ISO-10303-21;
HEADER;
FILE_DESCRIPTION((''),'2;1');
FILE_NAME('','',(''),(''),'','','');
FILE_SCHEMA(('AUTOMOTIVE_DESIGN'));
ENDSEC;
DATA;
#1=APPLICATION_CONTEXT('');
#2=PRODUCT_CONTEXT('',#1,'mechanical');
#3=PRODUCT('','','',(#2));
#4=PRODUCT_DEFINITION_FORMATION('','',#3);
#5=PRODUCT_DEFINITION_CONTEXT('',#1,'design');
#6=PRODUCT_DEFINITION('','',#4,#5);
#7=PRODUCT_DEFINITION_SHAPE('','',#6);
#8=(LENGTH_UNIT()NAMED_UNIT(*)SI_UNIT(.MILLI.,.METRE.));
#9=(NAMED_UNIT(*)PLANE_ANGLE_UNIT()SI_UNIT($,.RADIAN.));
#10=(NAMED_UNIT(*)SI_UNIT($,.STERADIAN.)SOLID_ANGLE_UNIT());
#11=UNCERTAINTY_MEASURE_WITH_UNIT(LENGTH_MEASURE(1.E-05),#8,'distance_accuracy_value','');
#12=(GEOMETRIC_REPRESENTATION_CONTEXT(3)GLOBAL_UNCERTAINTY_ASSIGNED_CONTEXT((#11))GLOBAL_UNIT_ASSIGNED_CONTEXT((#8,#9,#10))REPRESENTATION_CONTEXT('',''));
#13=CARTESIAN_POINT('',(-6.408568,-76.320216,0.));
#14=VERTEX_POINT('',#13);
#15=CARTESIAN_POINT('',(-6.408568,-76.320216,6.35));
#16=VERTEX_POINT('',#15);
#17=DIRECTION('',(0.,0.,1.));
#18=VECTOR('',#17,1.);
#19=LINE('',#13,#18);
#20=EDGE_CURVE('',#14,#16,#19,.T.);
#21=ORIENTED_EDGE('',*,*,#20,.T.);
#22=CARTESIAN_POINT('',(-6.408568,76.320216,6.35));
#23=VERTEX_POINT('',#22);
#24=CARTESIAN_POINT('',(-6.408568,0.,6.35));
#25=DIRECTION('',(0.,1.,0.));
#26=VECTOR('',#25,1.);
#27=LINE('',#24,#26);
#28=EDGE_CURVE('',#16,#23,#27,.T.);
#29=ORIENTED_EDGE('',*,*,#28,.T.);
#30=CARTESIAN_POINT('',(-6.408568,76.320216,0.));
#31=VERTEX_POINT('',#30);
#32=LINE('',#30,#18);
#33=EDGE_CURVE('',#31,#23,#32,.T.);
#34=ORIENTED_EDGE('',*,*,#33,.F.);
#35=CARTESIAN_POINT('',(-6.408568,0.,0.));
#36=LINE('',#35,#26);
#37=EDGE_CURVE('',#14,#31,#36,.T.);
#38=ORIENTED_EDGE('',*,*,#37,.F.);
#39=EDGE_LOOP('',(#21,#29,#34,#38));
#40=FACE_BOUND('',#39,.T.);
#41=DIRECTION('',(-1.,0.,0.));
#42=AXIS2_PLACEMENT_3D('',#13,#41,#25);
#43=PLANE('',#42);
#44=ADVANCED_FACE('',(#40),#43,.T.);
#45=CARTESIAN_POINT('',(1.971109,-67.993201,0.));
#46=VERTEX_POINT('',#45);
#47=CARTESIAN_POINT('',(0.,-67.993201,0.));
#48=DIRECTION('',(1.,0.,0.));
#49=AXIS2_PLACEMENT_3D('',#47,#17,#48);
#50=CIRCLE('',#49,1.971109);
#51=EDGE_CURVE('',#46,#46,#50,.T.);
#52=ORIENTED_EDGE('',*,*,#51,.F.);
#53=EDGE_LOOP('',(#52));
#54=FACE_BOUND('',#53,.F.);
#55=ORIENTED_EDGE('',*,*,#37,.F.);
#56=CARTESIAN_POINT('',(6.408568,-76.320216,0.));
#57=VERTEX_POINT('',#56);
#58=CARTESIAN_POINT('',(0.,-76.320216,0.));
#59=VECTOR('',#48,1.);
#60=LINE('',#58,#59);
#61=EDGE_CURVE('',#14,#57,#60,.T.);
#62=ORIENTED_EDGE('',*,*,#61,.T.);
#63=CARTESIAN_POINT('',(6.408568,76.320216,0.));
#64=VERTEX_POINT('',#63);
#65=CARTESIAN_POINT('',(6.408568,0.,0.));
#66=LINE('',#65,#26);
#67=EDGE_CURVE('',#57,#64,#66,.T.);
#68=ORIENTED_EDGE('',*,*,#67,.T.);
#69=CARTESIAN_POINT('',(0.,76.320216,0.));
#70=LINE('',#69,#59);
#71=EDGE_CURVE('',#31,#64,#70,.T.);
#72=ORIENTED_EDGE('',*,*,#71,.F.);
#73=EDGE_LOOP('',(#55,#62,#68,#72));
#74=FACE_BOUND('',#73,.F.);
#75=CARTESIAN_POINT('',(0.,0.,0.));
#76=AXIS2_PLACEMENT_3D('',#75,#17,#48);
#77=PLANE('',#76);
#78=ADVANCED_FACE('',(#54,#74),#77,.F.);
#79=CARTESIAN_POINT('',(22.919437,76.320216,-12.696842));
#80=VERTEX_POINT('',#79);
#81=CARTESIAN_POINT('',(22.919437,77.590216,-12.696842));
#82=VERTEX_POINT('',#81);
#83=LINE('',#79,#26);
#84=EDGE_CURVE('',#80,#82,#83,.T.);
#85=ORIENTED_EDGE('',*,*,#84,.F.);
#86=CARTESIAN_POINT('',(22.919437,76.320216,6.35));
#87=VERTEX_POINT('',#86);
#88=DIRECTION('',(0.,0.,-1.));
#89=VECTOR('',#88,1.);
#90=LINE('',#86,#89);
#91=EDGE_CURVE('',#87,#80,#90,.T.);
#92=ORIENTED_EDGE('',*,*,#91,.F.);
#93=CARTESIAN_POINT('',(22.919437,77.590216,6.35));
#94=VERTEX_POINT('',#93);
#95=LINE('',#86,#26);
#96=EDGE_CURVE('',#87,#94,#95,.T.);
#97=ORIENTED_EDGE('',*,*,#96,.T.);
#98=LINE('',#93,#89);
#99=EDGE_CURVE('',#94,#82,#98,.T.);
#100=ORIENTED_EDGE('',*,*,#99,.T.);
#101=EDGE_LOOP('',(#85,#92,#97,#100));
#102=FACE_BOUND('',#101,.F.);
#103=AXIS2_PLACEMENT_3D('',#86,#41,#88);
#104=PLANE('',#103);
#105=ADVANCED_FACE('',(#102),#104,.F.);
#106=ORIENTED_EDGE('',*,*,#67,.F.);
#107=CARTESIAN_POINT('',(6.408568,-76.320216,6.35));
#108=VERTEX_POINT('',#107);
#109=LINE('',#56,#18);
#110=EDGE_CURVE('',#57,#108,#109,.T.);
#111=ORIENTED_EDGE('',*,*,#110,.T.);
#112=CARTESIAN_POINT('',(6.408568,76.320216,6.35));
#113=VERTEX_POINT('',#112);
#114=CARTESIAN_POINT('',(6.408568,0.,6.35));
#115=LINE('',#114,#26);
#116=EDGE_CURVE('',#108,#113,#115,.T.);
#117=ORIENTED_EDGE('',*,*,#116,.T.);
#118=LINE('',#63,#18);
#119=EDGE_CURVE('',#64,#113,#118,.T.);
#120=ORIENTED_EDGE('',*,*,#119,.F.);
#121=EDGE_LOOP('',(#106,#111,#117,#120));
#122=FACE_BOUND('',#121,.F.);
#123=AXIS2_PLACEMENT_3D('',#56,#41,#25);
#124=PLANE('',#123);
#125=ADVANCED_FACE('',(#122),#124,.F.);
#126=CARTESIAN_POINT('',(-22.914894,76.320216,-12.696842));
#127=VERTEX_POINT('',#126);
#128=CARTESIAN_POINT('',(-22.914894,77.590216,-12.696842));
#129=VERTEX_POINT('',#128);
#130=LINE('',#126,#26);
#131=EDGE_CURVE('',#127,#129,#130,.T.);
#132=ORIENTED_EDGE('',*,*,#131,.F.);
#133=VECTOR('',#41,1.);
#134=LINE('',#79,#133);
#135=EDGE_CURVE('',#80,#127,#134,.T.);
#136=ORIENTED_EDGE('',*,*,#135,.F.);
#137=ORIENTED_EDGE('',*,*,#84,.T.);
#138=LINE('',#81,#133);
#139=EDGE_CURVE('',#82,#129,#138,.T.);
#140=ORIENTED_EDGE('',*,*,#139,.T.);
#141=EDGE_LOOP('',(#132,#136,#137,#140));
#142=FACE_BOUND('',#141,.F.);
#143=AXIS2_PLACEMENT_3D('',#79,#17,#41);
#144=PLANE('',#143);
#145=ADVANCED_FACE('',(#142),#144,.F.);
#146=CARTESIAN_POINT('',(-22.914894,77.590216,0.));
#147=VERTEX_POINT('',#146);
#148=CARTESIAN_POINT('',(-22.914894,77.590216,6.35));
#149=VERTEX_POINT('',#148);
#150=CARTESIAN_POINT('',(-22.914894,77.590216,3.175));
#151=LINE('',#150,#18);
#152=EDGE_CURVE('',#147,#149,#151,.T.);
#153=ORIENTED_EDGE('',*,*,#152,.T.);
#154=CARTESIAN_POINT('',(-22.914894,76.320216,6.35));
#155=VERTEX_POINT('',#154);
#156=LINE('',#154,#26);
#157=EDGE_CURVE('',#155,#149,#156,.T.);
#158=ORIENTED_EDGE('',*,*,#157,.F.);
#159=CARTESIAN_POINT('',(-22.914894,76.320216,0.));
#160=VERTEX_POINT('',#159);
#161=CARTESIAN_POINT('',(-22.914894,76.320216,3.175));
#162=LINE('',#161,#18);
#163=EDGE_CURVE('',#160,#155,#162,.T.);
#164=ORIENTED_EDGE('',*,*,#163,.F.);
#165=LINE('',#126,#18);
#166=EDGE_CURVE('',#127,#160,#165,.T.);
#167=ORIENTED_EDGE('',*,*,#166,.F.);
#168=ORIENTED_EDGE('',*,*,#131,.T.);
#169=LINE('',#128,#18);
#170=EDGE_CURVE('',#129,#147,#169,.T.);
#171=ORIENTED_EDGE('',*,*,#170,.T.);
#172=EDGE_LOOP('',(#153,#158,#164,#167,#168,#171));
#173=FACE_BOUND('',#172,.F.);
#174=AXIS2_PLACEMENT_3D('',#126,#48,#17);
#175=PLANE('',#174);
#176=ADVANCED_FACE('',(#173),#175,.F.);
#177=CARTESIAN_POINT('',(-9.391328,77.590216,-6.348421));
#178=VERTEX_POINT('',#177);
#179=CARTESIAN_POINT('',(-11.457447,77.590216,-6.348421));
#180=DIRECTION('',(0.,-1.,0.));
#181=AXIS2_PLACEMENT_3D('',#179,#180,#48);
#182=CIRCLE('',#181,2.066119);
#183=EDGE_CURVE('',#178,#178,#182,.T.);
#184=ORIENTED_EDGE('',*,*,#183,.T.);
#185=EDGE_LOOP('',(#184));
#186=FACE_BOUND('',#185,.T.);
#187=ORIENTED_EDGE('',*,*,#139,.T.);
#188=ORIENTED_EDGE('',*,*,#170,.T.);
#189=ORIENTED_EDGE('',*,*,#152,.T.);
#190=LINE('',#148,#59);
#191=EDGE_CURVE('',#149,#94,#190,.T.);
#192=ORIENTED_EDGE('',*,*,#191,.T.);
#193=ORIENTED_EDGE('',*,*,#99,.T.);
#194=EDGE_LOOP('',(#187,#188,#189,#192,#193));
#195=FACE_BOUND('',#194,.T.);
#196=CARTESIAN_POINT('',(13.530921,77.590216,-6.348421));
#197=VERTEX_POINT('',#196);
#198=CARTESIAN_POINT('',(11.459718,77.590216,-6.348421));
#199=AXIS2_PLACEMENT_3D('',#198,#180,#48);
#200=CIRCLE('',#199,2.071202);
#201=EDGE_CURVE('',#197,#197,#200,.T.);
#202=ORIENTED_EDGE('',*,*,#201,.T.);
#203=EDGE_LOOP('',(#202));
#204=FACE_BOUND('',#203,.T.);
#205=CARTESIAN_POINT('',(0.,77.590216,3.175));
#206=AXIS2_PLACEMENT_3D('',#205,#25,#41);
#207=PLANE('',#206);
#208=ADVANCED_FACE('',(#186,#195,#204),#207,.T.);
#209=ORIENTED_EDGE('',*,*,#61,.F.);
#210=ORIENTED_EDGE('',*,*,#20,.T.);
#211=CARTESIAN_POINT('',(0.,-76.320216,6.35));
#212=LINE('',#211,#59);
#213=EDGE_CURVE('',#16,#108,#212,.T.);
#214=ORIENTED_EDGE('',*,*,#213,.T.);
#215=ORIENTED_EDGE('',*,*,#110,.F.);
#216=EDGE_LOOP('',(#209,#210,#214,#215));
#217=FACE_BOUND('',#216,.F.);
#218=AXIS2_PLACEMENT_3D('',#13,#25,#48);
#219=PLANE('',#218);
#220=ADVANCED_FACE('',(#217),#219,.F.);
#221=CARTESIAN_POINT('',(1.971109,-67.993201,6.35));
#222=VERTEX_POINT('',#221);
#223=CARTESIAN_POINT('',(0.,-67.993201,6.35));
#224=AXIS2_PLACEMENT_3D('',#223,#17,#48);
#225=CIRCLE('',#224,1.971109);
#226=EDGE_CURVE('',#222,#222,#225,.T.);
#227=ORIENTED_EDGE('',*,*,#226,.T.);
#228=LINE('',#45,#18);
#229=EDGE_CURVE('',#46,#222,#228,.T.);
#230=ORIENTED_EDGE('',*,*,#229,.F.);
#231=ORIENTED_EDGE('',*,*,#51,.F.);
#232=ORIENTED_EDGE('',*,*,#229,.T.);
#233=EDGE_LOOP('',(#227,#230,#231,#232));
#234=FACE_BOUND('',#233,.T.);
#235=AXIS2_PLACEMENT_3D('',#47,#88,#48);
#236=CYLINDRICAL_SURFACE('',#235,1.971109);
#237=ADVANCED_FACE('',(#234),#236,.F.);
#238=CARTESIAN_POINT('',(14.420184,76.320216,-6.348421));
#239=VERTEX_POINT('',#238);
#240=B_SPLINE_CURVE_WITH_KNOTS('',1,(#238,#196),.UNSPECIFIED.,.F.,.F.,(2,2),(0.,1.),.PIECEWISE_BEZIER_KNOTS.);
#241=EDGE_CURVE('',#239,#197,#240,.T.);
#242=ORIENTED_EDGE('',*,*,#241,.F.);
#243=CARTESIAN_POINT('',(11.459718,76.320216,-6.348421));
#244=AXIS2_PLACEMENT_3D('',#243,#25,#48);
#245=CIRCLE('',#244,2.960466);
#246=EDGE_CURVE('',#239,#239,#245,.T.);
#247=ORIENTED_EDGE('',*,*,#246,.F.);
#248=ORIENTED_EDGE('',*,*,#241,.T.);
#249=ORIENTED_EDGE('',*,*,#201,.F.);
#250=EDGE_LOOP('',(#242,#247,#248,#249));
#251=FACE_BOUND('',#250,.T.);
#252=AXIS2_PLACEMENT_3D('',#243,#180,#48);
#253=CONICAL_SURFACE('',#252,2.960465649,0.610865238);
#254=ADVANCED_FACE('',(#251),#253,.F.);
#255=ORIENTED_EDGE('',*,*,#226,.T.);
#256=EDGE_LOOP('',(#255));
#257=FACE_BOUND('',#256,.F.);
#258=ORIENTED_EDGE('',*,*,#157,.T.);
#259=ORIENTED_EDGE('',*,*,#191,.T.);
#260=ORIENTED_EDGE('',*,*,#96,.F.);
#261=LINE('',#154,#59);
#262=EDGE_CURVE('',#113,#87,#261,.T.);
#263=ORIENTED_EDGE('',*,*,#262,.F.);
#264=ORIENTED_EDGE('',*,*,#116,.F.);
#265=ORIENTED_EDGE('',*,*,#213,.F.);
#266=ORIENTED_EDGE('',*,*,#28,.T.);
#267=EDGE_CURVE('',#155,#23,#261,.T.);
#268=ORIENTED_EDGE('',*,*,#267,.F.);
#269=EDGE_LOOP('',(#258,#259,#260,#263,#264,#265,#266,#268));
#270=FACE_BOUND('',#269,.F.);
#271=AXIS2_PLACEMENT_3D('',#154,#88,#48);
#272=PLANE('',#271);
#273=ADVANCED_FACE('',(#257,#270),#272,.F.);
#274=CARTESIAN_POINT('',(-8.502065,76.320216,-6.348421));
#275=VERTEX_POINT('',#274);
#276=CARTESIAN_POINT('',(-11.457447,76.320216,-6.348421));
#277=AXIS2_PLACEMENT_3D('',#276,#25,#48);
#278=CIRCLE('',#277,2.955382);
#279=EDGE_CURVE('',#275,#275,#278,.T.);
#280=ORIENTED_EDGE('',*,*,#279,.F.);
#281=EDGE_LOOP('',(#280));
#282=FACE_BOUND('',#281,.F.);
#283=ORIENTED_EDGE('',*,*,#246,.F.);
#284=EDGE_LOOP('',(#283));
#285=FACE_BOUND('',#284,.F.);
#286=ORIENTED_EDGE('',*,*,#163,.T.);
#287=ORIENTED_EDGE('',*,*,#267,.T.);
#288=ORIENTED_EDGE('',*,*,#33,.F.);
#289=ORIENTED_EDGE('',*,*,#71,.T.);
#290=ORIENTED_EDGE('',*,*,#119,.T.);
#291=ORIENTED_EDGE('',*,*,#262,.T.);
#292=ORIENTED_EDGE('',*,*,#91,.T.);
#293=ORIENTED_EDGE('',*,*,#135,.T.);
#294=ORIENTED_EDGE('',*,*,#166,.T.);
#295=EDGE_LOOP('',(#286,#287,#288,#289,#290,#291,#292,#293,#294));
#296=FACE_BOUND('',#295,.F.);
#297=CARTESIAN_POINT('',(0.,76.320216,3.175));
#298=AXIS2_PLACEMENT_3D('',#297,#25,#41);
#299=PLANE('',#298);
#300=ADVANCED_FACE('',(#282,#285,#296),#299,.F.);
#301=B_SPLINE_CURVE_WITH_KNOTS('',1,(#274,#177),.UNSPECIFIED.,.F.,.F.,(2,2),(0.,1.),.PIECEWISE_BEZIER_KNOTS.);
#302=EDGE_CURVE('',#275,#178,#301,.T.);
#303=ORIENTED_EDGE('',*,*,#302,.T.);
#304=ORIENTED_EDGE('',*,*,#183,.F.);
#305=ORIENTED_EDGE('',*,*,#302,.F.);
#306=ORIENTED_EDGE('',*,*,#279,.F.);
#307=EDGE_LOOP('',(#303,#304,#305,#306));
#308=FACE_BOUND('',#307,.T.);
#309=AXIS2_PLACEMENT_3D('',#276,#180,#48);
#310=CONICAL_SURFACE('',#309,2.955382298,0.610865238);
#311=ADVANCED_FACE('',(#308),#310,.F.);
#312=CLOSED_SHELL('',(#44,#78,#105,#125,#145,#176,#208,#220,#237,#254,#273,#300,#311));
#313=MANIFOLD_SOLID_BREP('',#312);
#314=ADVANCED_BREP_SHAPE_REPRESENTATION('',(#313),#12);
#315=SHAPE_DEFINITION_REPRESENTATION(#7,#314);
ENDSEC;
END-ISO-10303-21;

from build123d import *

# Parameters (mm, degrees)
F0_W     = 12.8171369433
F0_H     = 152.6404321194
F0_R     = 1.9711085463
F1_DEPTH = 6.35
F2_W     = 12.8171369433
F2_H     = 6.35
F2_W_2   = 16.510868445
F2_W_3   = 16.5063254535
F3_DEPTH = 1.27
F4_R     = 2.9604656486
F4_R_2   = 2.9553822982
F5_DEPTH = 1.27
F5_TAPER = 35


with BuildPart() as f1:
    # F0 (on Top) → F1 (new body)
    with BuildSketch(Plane.XY):
        Rectangle(F0_W, F0_H)
        with Locations((0, -67.9932013154)):
            Circle(F0_R, mode=Mode.SUBTRACT)
    extrude(amount=F1_DEPTH)

    # F2 (on face) → F3 (join)
    with BuildSketch(Plane(origin=(0, 76.3202160597, 0), x_dir=(-1, 0, 0), z_dir=(0, 1, 0))):
        with Locations((0, 3.175)):
            Rectangle(F2_W, F2_H)
        with Locations((-14.6640026942, 3.175)):
            Rectangle(F2_W_2, F2_H)
        with Locations((14.6617311984, 3.175)):
            Rectangle(F2_W_3, F2_H)
        Polygon((6.4085684717, 0), (-6.4085684717, 0), (-22.9194369167, 0), (-22.9194369167, -12.6968417317), (22.9148939252, -12.6968417317), (22.9148939252, 0), align=None)
    extrude(amount=F3_DEPTH)

    # F4 (on face) → F5 (cut)
    with BuildSketch(Plane.XZ.offset(-76.3202160597)):
        with Locations((11.4597184584, -6.3484208658)):
            Circle(F4_R)
        with Locations((-11.4574469626, -6.3484208658)):
            Circle(F4_R_2)
    extrude(amount=-F5_DEPTH, taper=F5_TAPER, mode=Mode.SUBTRACT)


solid = f1.part
